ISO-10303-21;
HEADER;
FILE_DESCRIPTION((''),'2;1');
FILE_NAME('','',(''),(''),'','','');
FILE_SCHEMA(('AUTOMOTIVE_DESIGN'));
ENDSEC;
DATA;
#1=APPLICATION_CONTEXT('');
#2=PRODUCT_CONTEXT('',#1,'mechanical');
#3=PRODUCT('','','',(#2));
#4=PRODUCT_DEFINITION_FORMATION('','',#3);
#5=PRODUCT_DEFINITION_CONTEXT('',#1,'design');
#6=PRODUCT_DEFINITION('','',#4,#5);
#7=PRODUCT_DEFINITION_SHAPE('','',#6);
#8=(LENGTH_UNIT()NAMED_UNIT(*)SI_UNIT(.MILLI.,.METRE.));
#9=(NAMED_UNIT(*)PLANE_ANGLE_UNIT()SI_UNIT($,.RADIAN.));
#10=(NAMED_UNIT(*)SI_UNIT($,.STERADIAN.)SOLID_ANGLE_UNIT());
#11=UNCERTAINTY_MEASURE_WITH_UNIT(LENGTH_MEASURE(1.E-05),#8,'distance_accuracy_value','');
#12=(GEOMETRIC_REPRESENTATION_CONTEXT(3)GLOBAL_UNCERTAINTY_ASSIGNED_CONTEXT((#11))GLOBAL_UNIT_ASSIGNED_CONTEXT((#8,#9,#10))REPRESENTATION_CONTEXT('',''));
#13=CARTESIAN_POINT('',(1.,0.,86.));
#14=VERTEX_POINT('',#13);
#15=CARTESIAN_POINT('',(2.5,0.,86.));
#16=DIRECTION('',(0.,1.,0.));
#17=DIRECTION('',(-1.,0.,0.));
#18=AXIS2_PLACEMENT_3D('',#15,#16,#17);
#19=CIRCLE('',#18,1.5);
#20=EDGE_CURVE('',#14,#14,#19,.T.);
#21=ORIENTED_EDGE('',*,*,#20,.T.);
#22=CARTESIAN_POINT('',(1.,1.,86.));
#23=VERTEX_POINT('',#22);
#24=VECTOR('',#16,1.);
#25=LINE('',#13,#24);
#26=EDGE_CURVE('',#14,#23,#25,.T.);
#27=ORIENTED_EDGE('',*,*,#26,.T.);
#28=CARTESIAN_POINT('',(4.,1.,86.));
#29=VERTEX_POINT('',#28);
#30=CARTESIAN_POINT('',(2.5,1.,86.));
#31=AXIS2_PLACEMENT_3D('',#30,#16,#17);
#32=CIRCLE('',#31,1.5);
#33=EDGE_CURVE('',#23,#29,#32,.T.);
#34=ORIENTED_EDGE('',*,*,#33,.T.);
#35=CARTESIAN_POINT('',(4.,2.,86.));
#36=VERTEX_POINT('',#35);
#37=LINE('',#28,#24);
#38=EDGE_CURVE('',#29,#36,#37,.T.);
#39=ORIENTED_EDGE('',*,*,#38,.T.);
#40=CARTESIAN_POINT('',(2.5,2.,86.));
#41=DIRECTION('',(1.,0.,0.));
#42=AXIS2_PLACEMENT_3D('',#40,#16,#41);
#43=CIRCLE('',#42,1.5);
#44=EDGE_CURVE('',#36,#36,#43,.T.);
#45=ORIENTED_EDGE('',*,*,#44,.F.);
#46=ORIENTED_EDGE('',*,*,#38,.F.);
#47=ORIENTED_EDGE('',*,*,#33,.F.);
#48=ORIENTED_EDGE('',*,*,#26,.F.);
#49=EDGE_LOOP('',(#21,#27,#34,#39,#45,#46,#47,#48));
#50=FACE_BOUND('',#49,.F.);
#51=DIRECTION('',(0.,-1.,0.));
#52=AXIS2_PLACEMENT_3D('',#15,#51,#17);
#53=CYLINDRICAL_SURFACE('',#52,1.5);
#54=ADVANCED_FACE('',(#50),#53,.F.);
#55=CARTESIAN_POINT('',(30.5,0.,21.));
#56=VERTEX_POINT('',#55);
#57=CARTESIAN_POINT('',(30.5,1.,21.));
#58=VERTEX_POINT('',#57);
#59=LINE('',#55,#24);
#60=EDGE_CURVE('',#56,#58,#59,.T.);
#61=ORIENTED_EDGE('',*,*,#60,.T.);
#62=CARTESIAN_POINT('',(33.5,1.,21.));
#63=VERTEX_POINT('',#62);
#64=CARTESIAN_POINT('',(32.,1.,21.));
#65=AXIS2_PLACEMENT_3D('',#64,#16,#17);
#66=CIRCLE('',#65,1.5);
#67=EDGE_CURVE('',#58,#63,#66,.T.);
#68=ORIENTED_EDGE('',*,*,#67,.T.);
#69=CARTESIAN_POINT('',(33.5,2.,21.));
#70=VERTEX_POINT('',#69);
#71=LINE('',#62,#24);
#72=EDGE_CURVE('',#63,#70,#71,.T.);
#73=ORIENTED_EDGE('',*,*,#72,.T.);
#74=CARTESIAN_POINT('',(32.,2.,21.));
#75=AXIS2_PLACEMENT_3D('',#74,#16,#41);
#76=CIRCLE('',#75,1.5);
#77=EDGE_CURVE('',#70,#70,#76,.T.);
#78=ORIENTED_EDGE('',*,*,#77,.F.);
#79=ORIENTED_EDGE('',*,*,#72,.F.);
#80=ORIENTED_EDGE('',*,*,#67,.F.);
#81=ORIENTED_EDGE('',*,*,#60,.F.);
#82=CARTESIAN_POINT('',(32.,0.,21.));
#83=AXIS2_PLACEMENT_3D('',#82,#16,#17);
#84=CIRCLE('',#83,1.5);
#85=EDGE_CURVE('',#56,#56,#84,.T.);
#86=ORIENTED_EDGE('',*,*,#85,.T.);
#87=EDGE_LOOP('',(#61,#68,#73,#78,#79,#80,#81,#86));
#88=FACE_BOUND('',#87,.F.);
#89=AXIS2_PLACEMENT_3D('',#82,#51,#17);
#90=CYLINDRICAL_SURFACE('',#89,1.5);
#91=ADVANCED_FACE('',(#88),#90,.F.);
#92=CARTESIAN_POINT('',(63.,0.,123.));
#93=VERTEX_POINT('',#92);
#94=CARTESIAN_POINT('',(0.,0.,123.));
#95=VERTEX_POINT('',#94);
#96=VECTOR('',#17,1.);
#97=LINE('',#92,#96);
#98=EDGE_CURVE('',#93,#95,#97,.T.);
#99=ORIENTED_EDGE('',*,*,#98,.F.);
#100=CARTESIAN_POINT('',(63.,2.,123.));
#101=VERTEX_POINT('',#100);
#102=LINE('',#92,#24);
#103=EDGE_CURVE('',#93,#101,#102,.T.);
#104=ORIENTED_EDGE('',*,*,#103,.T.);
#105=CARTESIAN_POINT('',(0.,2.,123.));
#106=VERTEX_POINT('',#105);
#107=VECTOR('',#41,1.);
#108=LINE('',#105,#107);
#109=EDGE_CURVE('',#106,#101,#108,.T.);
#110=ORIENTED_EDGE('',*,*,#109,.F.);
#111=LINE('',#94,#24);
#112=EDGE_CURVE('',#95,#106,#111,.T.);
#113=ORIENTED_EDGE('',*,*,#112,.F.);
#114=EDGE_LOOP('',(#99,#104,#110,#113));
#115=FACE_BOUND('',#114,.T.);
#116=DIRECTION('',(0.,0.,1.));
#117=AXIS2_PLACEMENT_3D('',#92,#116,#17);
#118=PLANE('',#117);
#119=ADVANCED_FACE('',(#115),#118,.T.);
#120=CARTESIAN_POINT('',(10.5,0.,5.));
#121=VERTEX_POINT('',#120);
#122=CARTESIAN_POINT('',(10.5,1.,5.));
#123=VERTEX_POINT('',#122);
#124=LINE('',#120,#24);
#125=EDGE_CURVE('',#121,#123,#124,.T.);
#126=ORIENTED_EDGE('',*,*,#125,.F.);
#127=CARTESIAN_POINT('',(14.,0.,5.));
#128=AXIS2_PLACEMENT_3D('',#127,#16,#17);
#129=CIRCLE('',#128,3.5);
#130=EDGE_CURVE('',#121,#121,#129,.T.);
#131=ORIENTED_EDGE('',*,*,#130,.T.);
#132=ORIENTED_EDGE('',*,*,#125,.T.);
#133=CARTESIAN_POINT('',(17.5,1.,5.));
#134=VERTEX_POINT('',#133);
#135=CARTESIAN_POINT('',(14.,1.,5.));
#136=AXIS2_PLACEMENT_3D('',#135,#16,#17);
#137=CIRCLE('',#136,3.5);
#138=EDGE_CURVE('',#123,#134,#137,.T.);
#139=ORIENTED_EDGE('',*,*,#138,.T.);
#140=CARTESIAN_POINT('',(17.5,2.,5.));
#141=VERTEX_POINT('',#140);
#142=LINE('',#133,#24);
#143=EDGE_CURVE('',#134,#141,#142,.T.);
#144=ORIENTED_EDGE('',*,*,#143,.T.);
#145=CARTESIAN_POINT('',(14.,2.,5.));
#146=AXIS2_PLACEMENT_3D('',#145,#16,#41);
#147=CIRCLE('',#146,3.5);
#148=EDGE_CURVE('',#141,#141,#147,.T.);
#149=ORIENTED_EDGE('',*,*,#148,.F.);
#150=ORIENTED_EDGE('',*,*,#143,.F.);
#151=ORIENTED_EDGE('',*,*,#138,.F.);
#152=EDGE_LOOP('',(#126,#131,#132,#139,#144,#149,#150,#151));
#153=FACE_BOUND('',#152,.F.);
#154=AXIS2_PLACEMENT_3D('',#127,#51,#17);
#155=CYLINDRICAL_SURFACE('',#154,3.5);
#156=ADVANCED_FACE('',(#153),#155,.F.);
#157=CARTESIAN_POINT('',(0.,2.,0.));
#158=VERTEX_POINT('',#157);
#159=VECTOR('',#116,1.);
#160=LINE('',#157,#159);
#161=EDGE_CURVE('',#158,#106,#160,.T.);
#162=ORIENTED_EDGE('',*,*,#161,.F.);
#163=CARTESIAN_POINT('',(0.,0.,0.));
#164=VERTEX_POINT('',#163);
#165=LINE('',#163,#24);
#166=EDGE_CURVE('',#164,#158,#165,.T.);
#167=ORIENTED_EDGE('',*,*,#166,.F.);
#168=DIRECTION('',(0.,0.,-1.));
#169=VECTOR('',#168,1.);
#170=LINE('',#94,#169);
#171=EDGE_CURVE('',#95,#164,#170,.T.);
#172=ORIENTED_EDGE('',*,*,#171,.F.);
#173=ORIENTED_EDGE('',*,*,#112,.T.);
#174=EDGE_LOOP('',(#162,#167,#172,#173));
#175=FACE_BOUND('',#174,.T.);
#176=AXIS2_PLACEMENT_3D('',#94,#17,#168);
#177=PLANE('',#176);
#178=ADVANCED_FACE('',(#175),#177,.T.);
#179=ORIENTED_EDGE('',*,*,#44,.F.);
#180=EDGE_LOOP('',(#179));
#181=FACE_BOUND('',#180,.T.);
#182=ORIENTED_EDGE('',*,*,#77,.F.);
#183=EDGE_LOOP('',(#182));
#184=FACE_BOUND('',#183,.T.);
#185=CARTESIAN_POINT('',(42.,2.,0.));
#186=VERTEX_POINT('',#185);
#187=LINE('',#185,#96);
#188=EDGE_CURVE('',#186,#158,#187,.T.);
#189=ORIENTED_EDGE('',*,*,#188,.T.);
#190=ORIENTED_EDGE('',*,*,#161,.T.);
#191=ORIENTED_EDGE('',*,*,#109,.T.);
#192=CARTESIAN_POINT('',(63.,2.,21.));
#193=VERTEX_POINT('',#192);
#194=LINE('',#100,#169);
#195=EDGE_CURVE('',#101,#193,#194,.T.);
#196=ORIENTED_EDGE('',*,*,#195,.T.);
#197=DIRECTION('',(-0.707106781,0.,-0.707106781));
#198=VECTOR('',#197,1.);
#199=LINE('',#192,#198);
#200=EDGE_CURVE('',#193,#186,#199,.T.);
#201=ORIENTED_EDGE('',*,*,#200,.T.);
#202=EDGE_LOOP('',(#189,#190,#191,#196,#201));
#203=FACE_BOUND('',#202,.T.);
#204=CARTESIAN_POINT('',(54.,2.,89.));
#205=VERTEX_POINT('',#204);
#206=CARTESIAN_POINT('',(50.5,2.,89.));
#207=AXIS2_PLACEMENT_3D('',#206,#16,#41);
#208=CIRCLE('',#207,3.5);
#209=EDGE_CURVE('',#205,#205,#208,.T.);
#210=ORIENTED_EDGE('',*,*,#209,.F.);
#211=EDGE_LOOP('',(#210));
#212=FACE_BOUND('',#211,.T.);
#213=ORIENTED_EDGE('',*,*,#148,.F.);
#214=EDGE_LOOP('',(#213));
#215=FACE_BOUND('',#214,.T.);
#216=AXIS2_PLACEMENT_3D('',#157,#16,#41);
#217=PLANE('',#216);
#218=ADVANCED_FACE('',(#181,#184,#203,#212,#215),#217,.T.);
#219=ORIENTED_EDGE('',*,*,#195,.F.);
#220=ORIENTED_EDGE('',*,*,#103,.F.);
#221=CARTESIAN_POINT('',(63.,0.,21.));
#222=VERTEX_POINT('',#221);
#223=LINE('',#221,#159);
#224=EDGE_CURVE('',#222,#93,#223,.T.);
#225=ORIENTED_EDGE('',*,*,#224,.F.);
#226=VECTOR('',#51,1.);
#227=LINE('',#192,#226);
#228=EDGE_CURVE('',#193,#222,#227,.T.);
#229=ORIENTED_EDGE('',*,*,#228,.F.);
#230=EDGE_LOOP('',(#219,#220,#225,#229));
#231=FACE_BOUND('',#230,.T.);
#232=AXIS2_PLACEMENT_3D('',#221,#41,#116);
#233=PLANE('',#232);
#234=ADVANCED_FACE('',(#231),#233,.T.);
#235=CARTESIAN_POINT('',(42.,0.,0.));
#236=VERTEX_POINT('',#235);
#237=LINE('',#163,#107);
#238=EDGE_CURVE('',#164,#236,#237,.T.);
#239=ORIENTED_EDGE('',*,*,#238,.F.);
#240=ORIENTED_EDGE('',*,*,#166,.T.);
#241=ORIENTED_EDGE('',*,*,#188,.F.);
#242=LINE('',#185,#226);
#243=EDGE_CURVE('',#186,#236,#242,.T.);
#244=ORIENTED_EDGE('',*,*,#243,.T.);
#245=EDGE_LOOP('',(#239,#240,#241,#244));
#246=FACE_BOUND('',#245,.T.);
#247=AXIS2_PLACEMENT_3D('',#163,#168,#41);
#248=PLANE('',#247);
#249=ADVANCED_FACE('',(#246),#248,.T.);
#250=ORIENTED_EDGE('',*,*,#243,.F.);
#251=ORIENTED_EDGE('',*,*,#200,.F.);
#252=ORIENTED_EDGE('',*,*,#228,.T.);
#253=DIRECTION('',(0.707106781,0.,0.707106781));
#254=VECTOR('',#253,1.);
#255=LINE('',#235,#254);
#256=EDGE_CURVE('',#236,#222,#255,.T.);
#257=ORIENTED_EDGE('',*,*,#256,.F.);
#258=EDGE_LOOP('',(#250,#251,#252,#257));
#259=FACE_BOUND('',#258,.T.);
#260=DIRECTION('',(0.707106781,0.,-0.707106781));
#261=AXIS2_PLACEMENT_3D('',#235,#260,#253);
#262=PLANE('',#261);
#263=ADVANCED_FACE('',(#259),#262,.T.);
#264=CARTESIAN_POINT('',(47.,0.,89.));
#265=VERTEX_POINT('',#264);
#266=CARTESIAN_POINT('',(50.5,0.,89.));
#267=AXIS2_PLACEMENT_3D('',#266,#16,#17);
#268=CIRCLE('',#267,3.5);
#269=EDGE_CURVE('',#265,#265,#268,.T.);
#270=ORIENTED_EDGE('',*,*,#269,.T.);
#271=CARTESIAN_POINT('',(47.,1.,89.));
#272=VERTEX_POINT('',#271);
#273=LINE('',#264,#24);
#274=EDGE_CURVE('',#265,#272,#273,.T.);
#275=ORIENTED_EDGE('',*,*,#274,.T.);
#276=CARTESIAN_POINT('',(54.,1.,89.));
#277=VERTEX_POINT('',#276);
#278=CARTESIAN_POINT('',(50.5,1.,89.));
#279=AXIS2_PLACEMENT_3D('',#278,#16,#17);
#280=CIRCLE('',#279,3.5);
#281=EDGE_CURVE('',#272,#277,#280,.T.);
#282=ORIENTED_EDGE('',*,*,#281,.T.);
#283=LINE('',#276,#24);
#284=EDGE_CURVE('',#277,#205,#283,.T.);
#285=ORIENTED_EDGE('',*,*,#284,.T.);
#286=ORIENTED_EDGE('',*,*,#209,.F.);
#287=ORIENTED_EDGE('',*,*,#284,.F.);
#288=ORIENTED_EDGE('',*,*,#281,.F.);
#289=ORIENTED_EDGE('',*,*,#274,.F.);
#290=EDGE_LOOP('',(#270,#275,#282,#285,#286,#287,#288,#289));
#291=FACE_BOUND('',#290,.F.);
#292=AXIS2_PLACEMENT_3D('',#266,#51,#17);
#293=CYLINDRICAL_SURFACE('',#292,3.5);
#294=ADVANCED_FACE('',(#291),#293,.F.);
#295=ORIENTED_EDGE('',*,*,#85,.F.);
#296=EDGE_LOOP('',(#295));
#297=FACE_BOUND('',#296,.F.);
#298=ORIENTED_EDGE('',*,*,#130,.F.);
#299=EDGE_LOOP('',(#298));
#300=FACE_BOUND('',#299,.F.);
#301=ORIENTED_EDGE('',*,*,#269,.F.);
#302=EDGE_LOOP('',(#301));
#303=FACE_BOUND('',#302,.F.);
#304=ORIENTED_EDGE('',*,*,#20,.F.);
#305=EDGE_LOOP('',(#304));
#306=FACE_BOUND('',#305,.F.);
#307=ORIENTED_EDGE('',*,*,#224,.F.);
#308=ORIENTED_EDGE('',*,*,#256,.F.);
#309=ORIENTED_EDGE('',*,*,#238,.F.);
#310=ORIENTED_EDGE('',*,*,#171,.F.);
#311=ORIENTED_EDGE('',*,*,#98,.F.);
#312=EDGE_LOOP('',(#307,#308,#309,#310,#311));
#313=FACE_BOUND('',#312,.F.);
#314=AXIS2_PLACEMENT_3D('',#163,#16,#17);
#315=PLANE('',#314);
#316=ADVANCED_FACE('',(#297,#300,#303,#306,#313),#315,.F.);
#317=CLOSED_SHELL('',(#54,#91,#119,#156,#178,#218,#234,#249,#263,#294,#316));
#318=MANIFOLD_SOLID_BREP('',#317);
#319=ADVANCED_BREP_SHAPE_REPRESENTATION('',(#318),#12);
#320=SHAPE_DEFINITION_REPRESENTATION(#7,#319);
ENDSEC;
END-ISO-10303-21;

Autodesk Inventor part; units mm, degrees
ref_plane "YZ Plane" through (0, 0, 0) normal (1, 0, 0) x (0, 1, 0)
ref_plane "XZ Plane" through (0, 0, 0) normal (0, 1, 0) x (-1, 0, 0)
ref_plane "XY Plane" through (0, 0, 0) normal (0, 0, 1) x (1, 0, 0)
sketch "Skizze1" plane through (0, 0, 0) normal (0, 1, 0) x (-1, 0, 0)
  line L0 (0, 0) -> (-42, 0)
  line L1 (-63, 21) -> (-63, 123)
  line L2 (-63, 123) -> (0, 123)
  line L3 (0, 123) -> (0, 0)
  line L4 (-42, 0) -> (-63, 21)
  line L5 (-42, 0) -> (-12.3015, 0) construction
  circle A0 centre (-14, 5) radius 3.5
  circle A1 centre (-32, 21) radius 1.5
  circle A2 centre (-2.5, 86) radius 1.5
  circle A3 centre (-50.5, 89) radius 3.5
  dimension "d0" = 63
  dimension "d1" = 102
  dimension "d2" = 135
  dimension "d3" = 42
  dimension "d4" = 7
  dimension "d5" = 3
  dimension "d6" = 3
  dimension "d7" = 7
  dimension "d8" = 2.5
  dimension "d9" = 37
  dimension "d10" = 14
  dimension "d11" = 5
  dimension "d12" = 21
  dimension "d13" = 32
  dimension "d14" = 12.5
  dimension "d15" = 34
extrude "Extrusion1" add sketch "Skizze1" along normal blind 1
sketch "Sketch2" plane through (0, 1, 0) normal (0, 1, 0) x (1, 0, 0)
  circle A0 centre (50.5, -89) radius 3.5 projected
  circle A1 centre (14, -5) radius 3.5 projected
  circle A2 centre (2.5, -86) radius 1.5 projected
  circle A3 centre (32, -21) radius 1.5 projected
  line L0 (42, 0) -> (0, 0) projected
  line L1 (0, 0) -> (0, -123) projected
  line L2 (0, -123) -> (63, -123) projected
  line L3 (63, -123) -> (63, -21) projected
  line L4 (63, -21) -> (42, 0) projected
extrude "Extrusion2" add sketch "Sketch2" along normal blind 1
properties part number "01_PCBoard"
